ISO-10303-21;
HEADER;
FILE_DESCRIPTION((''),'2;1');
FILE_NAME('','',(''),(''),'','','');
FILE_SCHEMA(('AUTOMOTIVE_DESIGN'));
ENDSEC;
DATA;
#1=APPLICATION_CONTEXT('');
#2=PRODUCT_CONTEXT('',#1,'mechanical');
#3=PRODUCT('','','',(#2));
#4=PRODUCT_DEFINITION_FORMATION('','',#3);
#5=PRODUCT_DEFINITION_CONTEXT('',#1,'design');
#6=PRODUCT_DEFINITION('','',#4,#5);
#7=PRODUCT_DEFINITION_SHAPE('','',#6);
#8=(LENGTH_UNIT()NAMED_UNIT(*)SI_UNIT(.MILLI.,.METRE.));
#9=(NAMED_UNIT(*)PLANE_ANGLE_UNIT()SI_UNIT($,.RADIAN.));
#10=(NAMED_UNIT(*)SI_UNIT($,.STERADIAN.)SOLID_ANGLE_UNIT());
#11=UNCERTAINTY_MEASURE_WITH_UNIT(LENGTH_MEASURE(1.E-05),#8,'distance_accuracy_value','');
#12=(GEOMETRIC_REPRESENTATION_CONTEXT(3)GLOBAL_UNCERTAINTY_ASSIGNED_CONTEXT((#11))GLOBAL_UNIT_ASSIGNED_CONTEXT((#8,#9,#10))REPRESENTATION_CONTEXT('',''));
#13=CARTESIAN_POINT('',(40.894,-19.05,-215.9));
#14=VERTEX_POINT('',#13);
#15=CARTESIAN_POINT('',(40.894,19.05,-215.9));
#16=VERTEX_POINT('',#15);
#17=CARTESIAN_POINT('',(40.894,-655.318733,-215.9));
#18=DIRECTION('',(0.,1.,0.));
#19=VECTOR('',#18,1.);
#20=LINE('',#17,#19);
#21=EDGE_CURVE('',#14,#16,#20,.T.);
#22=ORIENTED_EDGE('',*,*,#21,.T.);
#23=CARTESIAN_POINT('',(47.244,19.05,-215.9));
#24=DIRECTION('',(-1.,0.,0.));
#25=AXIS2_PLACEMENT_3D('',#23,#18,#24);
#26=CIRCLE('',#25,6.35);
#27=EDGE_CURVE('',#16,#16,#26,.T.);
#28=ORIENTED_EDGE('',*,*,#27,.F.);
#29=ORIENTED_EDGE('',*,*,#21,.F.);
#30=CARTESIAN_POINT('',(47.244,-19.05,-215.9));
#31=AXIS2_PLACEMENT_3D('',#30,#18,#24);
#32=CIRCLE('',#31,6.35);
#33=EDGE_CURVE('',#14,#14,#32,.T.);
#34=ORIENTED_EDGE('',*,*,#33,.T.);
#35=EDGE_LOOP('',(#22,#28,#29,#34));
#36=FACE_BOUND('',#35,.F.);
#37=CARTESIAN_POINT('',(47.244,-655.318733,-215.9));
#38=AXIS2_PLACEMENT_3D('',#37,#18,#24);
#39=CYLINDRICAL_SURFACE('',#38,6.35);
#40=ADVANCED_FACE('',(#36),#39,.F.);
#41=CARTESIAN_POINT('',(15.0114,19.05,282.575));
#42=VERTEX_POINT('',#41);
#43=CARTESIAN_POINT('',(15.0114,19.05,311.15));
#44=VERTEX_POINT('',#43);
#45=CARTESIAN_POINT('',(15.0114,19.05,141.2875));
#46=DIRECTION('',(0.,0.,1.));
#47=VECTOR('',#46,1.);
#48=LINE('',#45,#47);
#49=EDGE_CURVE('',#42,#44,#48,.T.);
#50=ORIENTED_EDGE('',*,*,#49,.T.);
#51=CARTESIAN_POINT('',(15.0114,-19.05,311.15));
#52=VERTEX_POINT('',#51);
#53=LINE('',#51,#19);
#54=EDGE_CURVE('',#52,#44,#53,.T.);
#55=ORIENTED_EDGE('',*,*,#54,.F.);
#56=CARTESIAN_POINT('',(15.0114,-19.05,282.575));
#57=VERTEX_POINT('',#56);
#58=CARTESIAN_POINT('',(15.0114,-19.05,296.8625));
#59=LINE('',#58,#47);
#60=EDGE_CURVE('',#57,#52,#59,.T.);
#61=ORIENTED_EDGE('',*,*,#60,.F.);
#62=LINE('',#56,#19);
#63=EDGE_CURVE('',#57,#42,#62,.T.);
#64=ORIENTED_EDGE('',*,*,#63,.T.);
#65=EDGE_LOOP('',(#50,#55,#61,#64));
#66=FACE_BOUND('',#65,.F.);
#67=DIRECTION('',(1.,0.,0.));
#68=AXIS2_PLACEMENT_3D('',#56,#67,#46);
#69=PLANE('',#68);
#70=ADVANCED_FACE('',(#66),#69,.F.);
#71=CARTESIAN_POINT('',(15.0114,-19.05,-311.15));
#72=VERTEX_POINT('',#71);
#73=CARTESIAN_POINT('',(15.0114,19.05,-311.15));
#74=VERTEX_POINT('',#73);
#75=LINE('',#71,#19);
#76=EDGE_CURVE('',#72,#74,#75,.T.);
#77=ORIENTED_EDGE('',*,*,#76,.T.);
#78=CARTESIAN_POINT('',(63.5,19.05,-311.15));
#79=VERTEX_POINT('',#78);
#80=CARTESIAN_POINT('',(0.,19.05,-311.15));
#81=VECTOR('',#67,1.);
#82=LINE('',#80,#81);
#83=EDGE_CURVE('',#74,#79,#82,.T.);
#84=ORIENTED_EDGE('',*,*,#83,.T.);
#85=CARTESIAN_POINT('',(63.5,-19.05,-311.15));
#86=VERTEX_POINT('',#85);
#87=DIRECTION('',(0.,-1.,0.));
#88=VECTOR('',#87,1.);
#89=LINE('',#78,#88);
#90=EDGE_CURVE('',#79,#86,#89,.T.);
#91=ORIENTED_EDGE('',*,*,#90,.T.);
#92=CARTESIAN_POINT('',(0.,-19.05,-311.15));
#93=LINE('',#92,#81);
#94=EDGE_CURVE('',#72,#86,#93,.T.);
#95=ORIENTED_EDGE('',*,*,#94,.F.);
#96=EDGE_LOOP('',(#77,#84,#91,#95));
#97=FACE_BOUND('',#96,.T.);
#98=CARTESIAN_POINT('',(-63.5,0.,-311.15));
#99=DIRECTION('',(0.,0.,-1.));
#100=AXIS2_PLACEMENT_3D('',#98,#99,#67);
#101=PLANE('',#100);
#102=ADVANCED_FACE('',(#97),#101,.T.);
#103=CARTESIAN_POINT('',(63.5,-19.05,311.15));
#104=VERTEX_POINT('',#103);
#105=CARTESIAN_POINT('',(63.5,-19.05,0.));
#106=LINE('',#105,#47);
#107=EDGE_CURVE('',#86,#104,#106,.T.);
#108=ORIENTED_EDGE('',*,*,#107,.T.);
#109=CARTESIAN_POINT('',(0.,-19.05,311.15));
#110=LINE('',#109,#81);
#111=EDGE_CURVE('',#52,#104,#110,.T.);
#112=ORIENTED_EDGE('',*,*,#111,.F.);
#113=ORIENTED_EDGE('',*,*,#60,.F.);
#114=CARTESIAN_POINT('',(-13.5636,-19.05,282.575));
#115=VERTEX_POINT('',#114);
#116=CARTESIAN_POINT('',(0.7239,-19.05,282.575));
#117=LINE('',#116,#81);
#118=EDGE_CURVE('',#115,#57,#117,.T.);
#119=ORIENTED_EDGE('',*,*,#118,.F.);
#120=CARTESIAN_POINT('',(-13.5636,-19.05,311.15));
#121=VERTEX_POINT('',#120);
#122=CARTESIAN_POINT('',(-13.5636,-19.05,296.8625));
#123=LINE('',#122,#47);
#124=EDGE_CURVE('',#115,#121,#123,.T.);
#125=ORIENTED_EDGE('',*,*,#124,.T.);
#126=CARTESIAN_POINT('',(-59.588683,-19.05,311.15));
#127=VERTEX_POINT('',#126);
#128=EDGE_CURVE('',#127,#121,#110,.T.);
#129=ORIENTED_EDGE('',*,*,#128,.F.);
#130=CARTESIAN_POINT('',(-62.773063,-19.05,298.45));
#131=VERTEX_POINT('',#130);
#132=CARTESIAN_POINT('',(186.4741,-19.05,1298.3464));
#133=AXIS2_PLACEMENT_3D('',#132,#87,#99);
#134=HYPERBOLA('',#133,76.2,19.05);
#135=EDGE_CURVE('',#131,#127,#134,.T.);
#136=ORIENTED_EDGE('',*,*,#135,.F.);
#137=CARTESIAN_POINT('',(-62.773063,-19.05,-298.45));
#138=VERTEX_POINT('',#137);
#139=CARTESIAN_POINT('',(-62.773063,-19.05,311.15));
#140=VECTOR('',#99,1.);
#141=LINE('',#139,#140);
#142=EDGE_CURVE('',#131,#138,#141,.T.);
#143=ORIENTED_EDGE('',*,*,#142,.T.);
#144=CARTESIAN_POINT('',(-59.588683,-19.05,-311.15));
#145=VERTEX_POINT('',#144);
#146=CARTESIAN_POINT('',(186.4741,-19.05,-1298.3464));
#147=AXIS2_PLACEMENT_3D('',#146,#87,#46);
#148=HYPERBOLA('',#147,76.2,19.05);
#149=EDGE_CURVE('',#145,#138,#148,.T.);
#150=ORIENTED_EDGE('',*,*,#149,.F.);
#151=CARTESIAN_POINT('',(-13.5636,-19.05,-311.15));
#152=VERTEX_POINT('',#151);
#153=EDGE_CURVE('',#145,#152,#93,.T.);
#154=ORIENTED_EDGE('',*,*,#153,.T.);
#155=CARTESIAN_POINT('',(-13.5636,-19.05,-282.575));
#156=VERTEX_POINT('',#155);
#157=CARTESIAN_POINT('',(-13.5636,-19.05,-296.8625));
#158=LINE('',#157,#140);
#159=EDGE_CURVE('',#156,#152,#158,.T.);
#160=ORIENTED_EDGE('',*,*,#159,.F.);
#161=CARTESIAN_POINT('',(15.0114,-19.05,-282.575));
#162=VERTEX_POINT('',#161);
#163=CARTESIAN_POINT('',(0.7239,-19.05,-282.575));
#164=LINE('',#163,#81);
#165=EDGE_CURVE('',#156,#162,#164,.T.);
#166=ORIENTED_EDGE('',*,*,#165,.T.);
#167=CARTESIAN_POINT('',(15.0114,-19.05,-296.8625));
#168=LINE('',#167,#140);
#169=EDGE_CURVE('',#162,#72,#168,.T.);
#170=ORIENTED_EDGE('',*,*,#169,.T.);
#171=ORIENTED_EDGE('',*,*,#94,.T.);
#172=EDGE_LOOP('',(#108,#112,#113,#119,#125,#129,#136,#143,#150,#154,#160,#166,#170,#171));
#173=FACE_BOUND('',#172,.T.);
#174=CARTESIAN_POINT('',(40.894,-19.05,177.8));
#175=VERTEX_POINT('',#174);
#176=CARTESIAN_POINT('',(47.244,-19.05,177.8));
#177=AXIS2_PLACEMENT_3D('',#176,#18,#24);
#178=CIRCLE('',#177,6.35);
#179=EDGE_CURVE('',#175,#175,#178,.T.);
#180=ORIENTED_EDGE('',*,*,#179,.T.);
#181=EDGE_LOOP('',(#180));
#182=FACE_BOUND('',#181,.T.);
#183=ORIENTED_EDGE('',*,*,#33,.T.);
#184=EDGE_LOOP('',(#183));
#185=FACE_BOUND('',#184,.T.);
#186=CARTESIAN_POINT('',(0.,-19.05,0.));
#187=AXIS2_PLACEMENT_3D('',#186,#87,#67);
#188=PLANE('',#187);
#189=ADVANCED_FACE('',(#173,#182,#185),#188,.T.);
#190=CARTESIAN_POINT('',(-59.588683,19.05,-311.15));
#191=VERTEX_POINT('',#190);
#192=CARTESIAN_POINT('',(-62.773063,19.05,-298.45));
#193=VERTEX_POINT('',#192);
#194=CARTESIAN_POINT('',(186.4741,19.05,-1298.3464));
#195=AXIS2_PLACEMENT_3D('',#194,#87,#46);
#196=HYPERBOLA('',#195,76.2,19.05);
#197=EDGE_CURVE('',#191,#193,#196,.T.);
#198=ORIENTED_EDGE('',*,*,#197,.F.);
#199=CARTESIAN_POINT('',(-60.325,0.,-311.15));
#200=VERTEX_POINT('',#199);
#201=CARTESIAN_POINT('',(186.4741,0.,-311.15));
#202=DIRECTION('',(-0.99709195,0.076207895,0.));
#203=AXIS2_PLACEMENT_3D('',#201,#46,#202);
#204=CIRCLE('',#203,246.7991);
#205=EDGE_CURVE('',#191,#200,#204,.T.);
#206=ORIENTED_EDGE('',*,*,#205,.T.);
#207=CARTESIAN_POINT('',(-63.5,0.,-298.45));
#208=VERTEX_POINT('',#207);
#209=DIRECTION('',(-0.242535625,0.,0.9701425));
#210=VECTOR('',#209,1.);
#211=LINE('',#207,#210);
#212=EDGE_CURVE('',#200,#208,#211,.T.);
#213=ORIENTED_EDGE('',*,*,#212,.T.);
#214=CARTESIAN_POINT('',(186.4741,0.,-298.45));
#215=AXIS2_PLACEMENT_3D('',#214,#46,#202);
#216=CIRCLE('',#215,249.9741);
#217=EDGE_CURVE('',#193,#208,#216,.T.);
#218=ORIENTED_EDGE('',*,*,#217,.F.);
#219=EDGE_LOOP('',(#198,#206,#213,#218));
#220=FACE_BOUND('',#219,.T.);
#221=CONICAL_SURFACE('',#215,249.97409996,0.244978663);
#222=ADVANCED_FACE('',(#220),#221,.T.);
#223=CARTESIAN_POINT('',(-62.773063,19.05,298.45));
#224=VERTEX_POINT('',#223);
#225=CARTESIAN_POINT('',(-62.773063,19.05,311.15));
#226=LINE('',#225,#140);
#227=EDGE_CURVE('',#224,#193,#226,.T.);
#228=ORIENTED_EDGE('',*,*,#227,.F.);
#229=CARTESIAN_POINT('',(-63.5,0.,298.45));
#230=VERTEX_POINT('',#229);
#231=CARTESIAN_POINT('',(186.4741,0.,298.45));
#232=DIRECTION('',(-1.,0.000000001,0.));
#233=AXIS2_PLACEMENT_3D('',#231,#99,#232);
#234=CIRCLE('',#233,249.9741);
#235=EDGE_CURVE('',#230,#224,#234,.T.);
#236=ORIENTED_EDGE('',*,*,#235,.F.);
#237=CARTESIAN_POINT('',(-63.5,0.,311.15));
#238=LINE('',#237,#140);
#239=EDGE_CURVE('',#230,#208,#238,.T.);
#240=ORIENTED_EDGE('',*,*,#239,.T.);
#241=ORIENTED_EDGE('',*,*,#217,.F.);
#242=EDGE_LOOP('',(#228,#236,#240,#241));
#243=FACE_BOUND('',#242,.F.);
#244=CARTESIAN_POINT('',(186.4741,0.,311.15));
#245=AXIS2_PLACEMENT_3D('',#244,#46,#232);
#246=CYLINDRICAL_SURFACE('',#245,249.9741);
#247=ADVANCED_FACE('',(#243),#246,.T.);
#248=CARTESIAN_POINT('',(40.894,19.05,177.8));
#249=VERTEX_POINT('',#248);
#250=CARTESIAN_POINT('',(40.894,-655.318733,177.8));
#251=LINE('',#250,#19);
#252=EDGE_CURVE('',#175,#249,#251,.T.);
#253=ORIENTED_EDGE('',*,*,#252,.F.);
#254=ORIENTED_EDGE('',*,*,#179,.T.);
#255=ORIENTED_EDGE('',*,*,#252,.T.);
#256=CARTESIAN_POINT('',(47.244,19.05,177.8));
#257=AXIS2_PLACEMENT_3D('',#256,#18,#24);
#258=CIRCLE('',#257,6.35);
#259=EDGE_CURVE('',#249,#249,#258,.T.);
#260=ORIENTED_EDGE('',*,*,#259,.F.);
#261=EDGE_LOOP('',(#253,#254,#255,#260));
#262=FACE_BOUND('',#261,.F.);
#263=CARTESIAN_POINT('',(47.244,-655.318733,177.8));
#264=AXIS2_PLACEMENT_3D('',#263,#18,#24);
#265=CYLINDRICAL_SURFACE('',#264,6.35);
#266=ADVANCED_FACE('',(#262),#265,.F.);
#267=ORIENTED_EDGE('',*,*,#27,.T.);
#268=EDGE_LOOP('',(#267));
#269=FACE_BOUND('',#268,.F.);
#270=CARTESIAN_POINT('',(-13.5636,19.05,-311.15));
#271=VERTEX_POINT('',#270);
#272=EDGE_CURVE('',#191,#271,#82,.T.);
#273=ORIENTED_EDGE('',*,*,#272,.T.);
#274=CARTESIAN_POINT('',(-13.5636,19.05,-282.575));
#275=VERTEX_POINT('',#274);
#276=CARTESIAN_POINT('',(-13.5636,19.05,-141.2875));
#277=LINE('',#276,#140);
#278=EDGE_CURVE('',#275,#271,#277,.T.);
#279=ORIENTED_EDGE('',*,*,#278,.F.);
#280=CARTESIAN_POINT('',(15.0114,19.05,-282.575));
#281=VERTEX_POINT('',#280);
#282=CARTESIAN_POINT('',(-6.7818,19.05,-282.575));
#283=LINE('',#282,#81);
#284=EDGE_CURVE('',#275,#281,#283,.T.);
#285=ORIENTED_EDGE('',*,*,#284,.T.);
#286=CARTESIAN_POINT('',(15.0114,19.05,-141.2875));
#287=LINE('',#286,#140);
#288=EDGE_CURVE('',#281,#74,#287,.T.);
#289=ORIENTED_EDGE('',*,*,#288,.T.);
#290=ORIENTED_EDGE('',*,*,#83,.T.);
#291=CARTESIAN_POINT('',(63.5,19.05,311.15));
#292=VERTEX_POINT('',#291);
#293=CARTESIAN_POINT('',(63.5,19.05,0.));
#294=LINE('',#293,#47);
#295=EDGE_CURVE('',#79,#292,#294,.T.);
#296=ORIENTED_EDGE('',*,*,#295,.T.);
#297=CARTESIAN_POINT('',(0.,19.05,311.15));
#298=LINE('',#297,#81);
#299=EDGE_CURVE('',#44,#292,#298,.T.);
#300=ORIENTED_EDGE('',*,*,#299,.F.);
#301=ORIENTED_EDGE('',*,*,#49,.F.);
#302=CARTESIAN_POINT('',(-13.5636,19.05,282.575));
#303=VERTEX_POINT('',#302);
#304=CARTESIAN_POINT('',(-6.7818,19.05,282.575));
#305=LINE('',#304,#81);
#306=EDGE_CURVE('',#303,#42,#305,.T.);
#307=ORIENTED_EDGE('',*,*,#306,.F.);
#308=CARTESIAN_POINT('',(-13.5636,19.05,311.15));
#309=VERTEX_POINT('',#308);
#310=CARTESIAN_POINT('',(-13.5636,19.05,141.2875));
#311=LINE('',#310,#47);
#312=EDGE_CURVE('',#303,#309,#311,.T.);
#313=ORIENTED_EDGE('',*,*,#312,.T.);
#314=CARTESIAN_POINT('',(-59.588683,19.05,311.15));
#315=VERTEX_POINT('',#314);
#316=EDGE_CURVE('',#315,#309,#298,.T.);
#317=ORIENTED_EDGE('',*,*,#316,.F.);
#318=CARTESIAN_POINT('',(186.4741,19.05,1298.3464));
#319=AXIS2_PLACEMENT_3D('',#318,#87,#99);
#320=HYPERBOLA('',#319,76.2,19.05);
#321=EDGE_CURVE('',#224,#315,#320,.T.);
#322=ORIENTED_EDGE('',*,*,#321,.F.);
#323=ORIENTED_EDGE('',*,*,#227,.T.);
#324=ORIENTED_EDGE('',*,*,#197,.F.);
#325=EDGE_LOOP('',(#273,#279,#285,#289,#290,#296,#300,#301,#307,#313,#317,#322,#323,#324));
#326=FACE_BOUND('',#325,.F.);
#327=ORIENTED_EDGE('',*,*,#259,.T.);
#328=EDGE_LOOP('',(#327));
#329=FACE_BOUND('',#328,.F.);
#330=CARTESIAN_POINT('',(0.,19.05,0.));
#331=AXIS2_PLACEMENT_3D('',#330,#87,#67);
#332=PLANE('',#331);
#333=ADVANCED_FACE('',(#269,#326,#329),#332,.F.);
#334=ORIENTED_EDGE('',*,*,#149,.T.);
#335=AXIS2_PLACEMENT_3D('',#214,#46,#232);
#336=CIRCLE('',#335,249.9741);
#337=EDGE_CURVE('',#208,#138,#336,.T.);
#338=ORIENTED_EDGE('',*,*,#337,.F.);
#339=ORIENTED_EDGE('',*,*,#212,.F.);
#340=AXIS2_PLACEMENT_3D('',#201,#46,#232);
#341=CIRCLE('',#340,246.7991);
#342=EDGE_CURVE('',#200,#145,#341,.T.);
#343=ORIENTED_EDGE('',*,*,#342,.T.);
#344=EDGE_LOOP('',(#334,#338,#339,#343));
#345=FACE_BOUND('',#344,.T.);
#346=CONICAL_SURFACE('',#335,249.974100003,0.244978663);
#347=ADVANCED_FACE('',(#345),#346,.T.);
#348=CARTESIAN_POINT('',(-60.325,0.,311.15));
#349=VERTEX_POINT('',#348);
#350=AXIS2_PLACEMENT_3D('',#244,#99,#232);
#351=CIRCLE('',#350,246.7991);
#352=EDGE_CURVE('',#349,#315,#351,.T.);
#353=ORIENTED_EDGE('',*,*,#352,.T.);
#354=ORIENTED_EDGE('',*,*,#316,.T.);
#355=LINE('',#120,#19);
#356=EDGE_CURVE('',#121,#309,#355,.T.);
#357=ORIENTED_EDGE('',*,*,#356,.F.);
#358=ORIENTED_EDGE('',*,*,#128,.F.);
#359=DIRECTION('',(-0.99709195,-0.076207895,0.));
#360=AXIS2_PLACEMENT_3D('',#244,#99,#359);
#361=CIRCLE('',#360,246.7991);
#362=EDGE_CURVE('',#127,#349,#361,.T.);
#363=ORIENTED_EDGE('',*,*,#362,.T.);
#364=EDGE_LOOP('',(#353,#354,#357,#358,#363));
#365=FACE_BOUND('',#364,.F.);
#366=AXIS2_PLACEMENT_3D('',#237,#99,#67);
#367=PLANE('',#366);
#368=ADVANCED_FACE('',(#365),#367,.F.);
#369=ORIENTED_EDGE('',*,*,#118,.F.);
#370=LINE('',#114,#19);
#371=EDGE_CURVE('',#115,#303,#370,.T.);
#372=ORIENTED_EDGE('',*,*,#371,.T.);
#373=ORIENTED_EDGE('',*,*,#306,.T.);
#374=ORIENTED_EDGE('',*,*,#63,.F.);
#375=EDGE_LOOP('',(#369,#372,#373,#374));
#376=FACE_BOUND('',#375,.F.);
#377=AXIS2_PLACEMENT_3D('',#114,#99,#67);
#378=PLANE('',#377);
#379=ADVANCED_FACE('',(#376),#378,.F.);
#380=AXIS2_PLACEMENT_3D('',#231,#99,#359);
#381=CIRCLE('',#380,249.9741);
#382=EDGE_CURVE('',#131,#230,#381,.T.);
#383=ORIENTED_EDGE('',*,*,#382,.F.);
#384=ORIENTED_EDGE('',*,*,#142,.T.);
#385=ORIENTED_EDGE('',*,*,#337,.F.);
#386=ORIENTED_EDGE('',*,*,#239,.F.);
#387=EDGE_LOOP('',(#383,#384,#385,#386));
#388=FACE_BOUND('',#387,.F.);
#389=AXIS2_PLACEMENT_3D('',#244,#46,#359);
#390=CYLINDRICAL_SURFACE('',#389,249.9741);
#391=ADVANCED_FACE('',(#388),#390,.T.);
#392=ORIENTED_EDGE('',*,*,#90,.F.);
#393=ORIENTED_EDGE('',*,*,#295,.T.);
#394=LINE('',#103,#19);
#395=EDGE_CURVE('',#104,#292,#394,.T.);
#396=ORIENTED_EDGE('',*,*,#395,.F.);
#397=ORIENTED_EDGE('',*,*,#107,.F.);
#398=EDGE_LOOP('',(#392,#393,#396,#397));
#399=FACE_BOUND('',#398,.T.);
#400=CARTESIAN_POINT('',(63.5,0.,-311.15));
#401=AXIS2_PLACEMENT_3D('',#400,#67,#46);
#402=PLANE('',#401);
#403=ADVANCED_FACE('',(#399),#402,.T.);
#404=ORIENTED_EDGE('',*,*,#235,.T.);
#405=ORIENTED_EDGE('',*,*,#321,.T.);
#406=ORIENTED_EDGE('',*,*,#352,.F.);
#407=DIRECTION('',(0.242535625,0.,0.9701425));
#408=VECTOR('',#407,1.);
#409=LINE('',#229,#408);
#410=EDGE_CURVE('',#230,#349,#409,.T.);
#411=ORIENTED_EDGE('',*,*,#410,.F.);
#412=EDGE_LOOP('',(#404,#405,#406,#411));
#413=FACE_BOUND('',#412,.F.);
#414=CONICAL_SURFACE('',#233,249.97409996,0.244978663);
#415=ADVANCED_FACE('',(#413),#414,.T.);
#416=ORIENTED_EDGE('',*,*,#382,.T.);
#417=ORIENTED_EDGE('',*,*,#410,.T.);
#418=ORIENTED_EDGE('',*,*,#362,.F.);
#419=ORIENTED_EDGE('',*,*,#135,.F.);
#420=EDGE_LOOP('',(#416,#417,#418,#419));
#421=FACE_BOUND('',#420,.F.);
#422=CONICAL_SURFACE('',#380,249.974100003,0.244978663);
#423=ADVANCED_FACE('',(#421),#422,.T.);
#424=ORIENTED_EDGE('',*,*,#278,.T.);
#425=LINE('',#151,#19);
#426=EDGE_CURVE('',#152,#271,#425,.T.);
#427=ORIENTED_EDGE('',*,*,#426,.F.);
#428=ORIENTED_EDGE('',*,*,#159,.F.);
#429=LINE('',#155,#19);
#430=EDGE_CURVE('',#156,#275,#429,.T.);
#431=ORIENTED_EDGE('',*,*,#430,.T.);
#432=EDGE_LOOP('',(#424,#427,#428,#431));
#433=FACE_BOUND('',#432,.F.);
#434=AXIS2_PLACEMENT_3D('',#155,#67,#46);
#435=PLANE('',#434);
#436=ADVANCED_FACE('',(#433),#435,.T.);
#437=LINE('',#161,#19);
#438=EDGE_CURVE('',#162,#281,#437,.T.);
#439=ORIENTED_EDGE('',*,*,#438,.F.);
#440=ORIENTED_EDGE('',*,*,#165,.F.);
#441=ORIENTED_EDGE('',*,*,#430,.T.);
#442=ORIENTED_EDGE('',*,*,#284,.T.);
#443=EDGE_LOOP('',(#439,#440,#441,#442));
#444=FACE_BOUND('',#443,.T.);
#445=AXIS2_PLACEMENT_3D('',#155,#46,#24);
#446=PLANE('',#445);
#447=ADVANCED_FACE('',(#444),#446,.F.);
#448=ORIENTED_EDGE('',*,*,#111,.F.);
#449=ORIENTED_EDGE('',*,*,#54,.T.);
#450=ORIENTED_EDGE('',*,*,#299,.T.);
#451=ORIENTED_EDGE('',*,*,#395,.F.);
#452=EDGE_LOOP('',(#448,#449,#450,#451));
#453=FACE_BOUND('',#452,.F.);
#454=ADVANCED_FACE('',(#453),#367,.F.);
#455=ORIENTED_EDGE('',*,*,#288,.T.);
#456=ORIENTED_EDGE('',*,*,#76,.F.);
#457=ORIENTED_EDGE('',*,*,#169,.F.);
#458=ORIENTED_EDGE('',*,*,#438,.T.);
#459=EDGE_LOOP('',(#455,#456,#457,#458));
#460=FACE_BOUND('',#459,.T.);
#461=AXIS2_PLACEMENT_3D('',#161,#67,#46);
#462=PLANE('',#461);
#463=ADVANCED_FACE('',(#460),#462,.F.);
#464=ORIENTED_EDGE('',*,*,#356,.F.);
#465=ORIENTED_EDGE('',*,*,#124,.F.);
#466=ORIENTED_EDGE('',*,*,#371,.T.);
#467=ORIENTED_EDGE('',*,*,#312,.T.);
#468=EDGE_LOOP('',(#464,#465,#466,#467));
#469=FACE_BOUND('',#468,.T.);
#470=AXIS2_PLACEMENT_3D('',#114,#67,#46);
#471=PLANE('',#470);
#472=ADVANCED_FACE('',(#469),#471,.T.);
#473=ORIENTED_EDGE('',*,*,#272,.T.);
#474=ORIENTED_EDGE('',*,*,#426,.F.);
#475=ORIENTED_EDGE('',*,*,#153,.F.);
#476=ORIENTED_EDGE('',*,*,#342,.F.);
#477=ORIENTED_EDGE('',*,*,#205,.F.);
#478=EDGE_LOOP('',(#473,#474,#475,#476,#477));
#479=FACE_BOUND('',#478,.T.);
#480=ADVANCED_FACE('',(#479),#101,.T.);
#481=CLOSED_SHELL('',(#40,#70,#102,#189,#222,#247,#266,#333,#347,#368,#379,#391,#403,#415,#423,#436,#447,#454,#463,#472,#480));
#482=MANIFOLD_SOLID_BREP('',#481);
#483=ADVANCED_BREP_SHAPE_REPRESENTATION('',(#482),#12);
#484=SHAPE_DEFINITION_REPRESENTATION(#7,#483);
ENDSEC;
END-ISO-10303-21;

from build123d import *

# Parameters (mm, degrees)
F0_W        = 127
F0_H        = 622.3
F1_DEPTH    = 19.05
F3_DEPTH    = 622.301
F5_D        = 12.7
F6_W        = 28.575
F6_H        = 28.575
F7_DEPTH    = 38.101
F8_C1_SIZE2 = 12.7
F8_C1_SIZE  = 3.175
F8_C2_SIZE2 = 3.175
F8_C2_SIZE  = 12.7


# Not quite as in the source:
# - a length typed as a fraction of an inch, garbled in the dataset ("3 / 203.2 mm" for 3/8 in), is restored
# - a pattern or mirror of a feature is missing from the dataset's text; its kind, count and spacing are read off the source's solid


with BuildPart() as f1:
    # F0 (on Front) → F1 (new body, symmetric)
    with BuildSketch(Plane.XZ):
        Rectangle(F0_W, F0_H)
    extrude(amount=F1_DEPTH, both=True)

    # F2 (on face) → F3 (cut, through all)
    with BuildSketch(Plane.XY.offset(311.15)):
        with BuildLine():
            ThreePointArc((-63.5, 2.159e-07), (-63.3181995898, 9.5319324627), (-62.773062814, 19.05))
            Line((-62.773062814, 19.05), (-63.5, 19.05))
            Line((-63.5, 19.05), (-63.5, 2.159e-07))
        make_face()
        with BuildLine():
            Line((-63.5, -19.05), (-62.773062814, -19.05))
            ThreePointArc((-62.773062814, -19.05), (-63.318199598, -9.531932247), (-63.5, 2.159e-07))
            Line((-63.5, 2.159e-07), (-63.5, -19.05))
        make_face()
    extrude(amount=-F3_DEPTH, mode=Mode.SUBTRACT)

    # F5 (through all)
    with Locations(Plane.XZ.offset(19.05)):
        with Locations((47.244, 177.8), (47.244, -215.9)):
            Hole(F5_D / 2)

    # F6 (on face) → F7 (cut, through all)
    with BuildSketch(Plane.XZ.offset(19.05)):
        with Locations((0.7239, 296.8625)):
            Rectangle(F6_W, F6_H)
    f7 = extrude(amount=-F7_DEPTH, mode=Mode.SUBTRACT)

    # F7_copies: F7 across plane
    add(f7.mirror(Plane(origin=(0, 0, 0), x_dir=(-1, 0, 0), z_dir=(0, 0, -1))), mode=Mode.SUBTRACT)

    # F8: chamfer of 12.7 x 3.175 on 2 edges, made by hand

    # F8_c1
    f8_c1_edges = [f1.edges().sort_by_distance(p)[0] for p in [
        (-63.5, 0, -311.15),
    ]]
    f8_c1_side = f1.faces().sort_by_distance((-63.4365, 0, -311.15))[0]
    chamfer(f8_c1_edges, length=F8_C1_SIZE, length2=F8_C1_SIZE2, reference=f8_c1_side)

    # F8_c2
    f8_c2_edges = [f1.edges().sort_by_distance(p)[0] for p in [
        (-63.5, 0, 311.15),
    ]]
    f8_c2_side = f1.faces().sort_by_distance((-63.5, 0, 311.0865))[0]
    chamfer(f8_c2_edges, length=F8_C2_SIZE, length2=F8_C2_SIZE2, reference=f8_c2_side)


solid = f1.part
